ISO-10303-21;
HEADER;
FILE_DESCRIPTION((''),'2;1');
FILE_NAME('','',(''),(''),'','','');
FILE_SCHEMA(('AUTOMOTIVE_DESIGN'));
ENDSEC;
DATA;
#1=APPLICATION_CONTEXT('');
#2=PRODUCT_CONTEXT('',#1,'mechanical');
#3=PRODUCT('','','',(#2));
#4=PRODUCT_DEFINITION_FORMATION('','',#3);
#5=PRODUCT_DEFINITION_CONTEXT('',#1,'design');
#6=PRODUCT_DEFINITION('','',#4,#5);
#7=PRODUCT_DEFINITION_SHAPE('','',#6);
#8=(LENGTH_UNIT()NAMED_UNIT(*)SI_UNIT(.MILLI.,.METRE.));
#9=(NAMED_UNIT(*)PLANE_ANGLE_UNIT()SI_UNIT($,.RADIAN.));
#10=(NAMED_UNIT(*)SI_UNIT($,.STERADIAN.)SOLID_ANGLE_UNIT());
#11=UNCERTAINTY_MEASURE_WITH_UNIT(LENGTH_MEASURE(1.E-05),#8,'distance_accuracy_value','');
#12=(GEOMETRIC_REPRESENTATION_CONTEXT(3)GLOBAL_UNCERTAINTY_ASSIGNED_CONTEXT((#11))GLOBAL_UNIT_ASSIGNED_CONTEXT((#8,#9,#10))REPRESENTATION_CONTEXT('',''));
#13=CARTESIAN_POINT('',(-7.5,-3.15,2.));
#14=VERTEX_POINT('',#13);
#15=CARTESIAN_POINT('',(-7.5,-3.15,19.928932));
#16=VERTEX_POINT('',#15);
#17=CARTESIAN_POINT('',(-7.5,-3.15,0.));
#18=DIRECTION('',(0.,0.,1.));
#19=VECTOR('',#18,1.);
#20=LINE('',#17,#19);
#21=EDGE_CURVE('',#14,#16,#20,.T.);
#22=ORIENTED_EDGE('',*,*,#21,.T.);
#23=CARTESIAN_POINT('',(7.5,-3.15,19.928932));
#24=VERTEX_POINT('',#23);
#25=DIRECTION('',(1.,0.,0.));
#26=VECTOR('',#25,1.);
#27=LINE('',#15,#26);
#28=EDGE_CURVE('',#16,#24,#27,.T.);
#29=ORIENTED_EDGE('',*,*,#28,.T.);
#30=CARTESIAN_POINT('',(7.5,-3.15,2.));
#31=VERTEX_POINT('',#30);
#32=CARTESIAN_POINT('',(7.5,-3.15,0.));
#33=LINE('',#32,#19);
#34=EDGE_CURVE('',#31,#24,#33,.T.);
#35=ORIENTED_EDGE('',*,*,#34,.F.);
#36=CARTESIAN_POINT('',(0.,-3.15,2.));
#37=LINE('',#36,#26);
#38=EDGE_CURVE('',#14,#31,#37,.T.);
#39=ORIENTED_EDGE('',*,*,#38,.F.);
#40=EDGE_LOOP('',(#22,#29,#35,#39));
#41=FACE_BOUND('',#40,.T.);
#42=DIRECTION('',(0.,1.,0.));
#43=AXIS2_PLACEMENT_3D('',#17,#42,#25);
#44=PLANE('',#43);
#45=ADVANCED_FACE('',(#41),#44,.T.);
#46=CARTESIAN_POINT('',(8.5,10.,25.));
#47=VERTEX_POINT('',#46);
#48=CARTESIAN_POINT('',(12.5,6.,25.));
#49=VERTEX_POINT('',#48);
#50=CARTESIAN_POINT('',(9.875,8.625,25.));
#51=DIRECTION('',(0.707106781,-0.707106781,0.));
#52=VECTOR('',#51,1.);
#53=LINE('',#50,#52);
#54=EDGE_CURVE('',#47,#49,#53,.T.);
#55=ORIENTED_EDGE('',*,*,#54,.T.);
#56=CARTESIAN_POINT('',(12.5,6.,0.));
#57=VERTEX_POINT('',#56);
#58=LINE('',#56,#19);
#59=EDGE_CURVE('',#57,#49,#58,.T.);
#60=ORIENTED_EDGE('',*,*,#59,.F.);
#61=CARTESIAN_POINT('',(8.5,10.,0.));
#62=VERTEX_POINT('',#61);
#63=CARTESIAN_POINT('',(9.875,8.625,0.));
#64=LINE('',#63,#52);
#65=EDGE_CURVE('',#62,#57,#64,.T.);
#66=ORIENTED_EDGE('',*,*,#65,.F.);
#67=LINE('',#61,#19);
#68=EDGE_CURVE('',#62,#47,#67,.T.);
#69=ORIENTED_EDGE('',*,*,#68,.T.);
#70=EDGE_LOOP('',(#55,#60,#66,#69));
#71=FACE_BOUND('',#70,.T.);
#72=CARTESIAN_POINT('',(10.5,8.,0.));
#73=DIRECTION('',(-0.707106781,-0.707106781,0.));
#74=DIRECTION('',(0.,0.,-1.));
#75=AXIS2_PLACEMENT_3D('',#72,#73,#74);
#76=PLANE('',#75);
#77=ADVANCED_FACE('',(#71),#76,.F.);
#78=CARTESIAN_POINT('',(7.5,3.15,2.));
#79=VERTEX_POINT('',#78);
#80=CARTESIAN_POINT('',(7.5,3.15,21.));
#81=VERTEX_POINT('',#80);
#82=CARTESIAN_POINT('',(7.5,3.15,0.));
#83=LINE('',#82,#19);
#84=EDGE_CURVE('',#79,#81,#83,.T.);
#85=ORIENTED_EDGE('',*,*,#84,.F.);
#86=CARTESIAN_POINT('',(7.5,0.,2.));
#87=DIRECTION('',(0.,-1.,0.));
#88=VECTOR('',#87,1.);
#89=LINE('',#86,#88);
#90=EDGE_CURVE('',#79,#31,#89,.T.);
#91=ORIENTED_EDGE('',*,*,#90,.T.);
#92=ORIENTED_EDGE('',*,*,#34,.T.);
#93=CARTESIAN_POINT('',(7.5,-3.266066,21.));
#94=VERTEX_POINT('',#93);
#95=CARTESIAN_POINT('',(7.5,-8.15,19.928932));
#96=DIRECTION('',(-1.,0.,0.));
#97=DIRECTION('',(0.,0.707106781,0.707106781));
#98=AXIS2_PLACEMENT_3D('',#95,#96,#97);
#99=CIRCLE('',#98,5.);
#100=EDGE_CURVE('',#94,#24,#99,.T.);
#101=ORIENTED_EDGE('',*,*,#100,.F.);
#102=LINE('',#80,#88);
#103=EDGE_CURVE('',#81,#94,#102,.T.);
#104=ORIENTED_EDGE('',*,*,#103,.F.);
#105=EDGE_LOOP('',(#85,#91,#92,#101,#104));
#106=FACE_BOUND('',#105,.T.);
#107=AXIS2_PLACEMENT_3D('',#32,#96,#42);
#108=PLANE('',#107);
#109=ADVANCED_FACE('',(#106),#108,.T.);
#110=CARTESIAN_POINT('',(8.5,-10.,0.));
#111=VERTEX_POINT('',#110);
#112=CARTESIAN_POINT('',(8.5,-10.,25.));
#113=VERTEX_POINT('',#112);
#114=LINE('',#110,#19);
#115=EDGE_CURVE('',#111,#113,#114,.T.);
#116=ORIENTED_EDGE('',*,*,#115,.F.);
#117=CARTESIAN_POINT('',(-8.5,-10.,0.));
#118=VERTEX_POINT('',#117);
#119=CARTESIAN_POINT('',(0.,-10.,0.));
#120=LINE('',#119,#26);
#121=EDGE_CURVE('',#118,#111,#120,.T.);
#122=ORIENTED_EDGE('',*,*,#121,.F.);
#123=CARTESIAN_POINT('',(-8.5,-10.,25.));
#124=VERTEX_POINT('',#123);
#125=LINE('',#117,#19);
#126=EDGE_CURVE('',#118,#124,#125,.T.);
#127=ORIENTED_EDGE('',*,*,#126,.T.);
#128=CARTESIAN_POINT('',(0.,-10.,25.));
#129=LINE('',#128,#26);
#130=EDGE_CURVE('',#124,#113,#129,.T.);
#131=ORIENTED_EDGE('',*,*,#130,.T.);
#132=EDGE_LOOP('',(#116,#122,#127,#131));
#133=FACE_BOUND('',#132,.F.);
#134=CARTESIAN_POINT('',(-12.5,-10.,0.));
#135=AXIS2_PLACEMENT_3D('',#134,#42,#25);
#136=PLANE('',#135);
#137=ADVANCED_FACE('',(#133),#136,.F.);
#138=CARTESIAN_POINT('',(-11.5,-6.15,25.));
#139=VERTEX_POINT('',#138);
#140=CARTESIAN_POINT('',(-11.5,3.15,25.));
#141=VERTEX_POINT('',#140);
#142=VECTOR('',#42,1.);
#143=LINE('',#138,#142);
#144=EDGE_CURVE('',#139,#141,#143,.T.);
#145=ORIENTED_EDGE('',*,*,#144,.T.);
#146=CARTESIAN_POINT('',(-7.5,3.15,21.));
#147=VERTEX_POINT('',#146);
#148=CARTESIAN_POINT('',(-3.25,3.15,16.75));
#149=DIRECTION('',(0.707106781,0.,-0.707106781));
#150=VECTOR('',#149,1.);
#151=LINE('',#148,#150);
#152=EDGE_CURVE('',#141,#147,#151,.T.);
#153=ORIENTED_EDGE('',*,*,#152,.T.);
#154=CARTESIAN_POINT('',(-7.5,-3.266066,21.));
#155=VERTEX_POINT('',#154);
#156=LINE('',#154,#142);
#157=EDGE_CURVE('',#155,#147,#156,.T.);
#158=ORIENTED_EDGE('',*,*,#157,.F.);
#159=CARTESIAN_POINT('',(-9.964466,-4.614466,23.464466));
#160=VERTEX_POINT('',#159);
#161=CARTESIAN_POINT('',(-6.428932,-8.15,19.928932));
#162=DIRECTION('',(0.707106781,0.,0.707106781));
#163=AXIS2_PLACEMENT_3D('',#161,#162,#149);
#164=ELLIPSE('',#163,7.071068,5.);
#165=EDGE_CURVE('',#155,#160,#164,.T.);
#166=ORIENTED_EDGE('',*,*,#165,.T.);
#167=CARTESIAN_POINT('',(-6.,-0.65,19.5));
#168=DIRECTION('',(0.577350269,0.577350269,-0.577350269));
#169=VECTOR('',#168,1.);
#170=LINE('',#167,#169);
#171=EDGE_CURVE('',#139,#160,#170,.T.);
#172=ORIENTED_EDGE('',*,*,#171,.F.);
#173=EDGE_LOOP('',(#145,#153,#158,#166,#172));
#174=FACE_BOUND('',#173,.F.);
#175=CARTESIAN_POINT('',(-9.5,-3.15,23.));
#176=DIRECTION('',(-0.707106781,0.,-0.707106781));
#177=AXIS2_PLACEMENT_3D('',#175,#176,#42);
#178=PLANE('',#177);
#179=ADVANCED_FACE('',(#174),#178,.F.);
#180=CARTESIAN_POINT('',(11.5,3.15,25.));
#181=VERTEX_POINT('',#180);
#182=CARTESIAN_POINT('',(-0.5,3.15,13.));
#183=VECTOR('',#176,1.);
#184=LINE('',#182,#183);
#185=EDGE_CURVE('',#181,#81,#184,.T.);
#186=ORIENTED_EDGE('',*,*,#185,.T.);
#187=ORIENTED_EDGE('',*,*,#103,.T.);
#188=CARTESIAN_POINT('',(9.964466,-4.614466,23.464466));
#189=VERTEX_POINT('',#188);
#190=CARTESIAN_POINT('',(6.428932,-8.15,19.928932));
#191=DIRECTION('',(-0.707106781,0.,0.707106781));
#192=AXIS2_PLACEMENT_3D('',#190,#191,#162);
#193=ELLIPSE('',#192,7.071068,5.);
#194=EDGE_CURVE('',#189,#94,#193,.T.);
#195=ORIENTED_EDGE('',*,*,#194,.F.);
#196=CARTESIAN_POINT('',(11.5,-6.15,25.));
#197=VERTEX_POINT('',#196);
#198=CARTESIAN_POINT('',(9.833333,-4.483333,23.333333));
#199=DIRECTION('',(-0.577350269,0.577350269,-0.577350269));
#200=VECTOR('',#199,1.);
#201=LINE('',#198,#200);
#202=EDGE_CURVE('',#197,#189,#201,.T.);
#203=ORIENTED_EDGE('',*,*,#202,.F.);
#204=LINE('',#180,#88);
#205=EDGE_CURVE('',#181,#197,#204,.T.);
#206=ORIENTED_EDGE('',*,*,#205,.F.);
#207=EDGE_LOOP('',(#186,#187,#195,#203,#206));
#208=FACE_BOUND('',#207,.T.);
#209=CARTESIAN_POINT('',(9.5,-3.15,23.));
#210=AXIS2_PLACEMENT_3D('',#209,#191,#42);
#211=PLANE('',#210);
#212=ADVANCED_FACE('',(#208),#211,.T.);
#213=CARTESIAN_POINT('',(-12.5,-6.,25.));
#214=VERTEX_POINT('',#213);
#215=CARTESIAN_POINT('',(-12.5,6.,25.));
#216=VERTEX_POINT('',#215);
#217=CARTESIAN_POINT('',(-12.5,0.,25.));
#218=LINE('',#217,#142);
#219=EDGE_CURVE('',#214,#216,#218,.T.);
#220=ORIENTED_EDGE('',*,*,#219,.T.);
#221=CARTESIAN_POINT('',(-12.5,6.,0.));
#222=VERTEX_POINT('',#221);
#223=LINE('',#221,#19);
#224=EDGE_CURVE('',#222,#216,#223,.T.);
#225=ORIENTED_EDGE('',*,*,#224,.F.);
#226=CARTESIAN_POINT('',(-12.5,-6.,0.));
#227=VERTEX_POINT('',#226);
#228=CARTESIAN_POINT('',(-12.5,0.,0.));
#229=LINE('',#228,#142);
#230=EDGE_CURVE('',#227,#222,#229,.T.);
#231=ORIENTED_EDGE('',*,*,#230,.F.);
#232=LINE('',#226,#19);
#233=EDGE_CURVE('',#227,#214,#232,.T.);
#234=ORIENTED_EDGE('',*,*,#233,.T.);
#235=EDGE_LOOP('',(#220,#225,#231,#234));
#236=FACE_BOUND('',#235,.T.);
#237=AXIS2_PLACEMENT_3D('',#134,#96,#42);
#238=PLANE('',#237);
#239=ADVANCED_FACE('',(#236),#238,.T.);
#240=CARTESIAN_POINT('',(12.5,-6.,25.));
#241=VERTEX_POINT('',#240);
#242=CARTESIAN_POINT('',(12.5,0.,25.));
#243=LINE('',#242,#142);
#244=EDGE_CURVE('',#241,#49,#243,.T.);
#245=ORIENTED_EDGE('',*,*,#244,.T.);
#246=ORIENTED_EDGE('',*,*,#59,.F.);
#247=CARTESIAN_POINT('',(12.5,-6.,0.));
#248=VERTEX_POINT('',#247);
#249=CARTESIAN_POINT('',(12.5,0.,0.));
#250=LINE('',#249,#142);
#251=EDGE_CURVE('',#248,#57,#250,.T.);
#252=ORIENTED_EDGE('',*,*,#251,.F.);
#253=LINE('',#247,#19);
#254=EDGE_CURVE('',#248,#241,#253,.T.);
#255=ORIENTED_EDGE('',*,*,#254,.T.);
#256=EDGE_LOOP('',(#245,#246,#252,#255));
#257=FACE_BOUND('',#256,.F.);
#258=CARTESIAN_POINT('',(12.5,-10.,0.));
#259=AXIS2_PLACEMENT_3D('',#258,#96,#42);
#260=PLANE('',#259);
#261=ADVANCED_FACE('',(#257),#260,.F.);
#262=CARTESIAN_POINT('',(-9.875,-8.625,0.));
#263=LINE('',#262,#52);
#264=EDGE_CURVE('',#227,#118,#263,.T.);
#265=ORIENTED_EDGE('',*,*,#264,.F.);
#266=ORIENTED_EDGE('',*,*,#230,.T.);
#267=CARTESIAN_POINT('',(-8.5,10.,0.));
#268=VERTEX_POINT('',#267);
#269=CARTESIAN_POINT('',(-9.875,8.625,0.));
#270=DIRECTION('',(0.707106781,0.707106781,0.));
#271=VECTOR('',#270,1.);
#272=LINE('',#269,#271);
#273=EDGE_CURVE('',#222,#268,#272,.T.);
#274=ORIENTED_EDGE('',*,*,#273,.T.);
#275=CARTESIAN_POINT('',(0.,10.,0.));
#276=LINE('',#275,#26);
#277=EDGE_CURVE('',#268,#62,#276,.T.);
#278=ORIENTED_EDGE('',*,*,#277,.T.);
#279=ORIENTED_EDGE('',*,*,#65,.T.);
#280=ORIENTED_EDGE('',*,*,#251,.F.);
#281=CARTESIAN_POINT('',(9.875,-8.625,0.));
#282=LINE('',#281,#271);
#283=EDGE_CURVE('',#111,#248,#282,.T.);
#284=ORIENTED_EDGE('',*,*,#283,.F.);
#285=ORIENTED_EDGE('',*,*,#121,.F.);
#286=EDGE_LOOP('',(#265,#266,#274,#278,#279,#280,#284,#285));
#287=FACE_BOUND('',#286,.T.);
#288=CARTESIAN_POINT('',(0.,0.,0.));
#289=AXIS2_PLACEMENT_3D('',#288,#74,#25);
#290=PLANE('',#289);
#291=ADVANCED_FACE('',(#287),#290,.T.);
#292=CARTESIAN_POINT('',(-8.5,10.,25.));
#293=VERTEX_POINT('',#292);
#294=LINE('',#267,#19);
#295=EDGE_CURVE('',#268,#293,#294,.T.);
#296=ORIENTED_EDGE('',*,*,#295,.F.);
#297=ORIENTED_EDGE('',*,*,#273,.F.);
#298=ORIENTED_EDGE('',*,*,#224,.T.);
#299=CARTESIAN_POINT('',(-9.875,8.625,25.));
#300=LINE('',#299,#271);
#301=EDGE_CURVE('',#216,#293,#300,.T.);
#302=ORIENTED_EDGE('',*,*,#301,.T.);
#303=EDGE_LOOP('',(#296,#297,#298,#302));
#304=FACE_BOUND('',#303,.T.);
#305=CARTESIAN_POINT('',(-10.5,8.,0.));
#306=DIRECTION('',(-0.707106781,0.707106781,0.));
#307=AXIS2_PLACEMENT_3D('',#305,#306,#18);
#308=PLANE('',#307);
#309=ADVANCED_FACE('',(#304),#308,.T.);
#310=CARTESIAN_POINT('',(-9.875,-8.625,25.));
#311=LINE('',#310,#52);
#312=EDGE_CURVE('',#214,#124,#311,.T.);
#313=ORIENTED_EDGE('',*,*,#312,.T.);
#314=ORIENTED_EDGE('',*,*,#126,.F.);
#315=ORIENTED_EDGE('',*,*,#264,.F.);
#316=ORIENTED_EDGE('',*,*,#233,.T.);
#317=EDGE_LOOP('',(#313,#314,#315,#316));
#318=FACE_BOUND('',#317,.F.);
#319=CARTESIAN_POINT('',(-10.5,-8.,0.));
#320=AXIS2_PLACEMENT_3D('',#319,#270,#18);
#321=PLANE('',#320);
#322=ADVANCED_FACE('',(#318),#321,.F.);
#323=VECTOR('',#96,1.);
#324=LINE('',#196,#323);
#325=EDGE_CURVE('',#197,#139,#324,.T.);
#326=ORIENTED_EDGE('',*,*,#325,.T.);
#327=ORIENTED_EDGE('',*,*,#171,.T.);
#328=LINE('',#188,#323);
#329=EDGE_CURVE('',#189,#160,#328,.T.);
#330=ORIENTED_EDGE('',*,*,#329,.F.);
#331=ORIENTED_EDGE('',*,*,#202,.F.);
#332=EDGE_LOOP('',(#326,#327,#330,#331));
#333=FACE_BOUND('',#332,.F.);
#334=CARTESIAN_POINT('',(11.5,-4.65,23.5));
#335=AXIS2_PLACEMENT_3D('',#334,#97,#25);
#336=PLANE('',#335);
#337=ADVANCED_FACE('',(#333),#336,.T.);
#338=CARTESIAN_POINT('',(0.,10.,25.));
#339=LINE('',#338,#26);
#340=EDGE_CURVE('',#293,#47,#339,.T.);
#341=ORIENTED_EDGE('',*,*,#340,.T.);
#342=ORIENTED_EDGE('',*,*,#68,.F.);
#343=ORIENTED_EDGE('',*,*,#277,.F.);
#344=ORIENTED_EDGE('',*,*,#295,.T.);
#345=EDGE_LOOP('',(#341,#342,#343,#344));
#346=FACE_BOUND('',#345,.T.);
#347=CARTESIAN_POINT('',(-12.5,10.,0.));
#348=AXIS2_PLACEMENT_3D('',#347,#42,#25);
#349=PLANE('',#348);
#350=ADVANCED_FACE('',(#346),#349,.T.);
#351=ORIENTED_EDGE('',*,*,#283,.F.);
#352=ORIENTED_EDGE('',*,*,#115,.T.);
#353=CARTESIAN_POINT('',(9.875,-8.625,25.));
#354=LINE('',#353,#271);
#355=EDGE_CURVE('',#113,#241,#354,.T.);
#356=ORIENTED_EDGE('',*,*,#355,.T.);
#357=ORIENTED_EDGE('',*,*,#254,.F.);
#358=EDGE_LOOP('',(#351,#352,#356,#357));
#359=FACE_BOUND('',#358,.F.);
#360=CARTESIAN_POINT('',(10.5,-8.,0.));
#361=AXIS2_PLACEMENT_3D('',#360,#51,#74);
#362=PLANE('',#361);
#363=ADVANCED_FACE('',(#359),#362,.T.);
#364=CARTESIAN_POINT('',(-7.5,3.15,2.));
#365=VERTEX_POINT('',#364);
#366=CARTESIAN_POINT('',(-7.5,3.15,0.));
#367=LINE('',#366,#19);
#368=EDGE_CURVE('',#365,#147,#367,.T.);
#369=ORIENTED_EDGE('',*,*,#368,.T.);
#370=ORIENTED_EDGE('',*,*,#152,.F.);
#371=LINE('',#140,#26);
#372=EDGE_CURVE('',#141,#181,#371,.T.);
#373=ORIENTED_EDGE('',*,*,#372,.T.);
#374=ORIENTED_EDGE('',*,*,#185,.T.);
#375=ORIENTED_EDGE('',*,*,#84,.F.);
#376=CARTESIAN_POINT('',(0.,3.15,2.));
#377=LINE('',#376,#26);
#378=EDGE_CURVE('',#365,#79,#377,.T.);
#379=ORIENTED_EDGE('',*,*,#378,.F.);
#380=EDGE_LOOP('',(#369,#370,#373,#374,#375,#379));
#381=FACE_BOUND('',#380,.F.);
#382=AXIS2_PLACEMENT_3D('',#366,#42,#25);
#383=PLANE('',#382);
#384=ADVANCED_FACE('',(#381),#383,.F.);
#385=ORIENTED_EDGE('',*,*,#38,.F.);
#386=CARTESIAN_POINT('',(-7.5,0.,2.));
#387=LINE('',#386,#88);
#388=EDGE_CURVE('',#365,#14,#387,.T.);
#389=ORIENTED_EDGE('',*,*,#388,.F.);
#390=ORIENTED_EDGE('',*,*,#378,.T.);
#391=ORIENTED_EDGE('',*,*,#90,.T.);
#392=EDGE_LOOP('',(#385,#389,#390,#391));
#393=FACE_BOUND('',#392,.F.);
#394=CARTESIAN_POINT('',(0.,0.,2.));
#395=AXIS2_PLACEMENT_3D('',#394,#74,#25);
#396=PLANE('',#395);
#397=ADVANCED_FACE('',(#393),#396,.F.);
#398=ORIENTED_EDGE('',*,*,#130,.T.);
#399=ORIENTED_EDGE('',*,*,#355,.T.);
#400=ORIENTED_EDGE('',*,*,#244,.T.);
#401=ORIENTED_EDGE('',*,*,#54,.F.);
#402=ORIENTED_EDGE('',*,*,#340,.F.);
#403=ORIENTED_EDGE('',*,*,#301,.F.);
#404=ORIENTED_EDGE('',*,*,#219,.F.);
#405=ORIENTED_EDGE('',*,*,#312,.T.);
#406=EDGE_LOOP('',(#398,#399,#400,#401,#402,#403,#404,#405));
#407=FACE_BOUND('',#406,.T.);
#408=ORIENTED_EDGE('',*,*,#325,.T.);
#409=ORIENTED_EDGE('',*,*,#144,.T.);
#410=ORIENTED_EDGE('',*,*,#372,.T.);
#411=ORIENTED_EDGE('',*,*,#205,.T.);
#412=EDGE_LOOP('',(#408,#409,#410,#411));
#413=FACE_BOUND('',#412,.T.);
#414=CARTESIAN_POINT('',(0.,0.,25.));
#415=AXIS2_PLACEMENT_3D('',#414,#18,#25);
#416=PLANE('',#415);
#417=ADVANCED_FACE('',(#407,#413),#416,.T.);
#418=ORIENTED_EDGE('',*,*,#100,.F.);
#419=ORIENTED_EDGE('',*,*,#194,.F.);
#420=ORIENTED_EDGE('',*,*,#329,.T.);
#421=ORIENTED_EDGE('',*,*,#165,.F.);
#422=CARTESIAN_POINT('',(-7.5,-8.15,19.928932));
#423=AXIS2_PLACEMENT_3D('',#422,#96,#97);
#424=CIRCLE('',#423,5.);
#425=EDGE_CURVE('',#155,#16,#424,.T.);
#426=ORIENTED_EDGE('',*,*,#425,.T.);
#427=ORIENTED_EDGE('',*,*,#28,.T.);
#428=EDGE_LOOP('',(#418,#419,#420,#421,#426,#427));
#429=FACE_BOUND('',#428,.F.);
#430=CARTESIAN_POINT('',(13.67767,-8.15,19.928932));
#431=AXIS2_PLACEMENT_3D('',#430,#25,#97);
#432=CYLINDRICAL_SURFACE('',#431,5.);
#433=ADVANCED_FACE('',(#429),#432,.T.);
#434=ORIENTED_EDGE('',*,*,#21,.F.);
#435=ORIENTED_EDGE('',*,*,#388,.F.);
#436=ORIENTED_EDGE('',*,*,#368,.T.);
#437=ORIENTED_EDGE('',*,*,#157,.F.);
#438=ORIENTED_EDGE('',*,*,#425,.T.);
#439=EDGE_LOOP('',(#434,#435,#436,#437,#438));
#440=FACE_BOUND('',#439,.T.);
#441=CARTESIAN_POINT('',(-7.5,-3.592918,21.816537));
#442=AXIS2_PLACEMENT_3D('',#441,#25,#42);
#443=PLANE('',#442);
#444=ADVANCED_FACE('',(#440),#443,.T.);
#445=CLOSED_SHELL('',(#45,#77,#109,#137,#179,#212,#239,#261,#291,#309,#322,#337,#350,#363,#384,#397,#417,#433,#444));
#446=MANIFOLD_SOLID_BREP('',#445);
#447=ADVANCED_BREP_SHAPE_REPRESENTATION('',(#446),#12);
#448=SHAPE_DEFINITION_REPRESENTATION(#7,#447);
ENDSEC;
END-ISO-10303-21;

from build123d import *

# Parameters (mm, degrees)
F0_W         = 25
F0_H         = 20
F0_W_2       = 15
F0_H_2       = 6.3
F1_DEPTH     = 25
F2_W         = 15
F2_H         = 6.3
F3_DEPTH     = 2
F4_SIZE      = 4
F5_SIZE      = 3
F6_T1_DEPTH  = 15
F6_T6_DEPTH  = 6.1776695297
F6_T11_DEPTH = 6.1776695297


# Not quite as in the source:
# - a fillet or chamfer that OpenCascade refuses, or shapes differently, is made with other operations: its cross-section is extruded or revolved along the edge and cut away or added


with BuildPart() as f1:
    # F0 (on Top) → F1 (new body)
    with BuildSketch(Plane.XY):
        Rectangle(F0_W, F0_H)
        Rectangle(F0_W_2, F0_H_2, mode=Mode.SUBTRACT)
    extrude(amount=F1_DEPTH)

    # F2 (on face) → F3 (join)
    with BuildSketch(Plane(origin=(0, 0, 0), x_dir=(1, 0, 0), z_dir=(0, 0, -1))):
        Rectangle(F2_W, F2_H)
    extrude(amount=-F3_DEPTH)

    # F4
    f4_edges = [f1.edges().sort_by_distance(p)[0] for p in [
        (-7.5, 0, 25),
        (7.5, 0, 25),
        (-12.5, -10, 12.5),
        (12.5, -10, 12.5),
        (12.5, 10, 12.5),
        (-12.5, 10, 12.5),
    ]]
    chamfer(f4_edges, length=F4_SIZE)

    # F5
    f5_edges = [f1.edges().sort_by_distance(p)[0] for p in [
        (0, -3.15, 25),
    ]]
    chamfer(f5_edges, length=F5_SIZE)

    # F6: fillet of radius 5 on 1 edges, made by hand

    # F6_s2 → F6_t1 (cut)
    with BuildSketch(Plane.YZ.offset(-7.5)):
        with BuildLine():
            ThreePointArc((-4.6144660941, 23.4644660941), (-3.5306023374, 21.84234935), (-3.15, 19.9289321881))
            Line((-3.15, 19.9289321881), (-3.15, 22))
            Line((-3.15, 22), (-4.6144660941, 23.4644660941))
        make_face()
    extrude(amount=F6_T1_DEPTH, mode=Mode.SUBTRACT)


with BuildPart() as f6_tool4:
    # F6_s5 → F6_t6 (new body)
    with BuildSketch(Plane.YZ.offset(13.6776695297)):
        with BuildLine():
            ThreePointArc((-4.6144660941, 23.4644660941), (-3.5306023374, 21.84234935), (-3.15, 19.9289321881))
            Line((-3.15, 19.9289321881), (-3.15, 22))
            Line((-3.15, 22), (-4.6144660941, 23.4644660941))
        make_face()
    extrude(amount=-F6_T6_DEPTH)

    split(bisect_by=Plane(origin=(-6.75, 0, 6.75), x_dir=(0, 1, 0), z_dir=(-0.7071067812, 0, 0.7071067812)), keep=Keep.TOP)


with BuildPart() as f1_1:
    add(f1.part)

    # F6_t3: cut F6_tool4
    add(f6_tool4.part, mode=Mode.SUBTRACT)


with BuildPart() as f6_tool9:
    # F6_s10 → F6_t11 (new body)
    with BuildSketch(Plane.YZ.offset(-7.5)):
        with BuildLine():
            ThreePointArc((-4.6144660941, 23.4644660941), (-3.5306023374, 21.84234935), (-3.15, 19.9289321881))
            Line((-3.15, 19.9289321881), (-3.15, 22))
            Line((-3.15, 22), (-4.6144660941, 23.4644660941))
        make_face()
    extrude(amount=-F6_T11_DEPTH)

    split(bisect_by=Plane(origin=(6.75, 0, 6.75), x_dir=(0, 1, 0), z_dir=(0.7071067812, 0, 0.7071067812)), keep=Keep.TOP)


with BuildPart() as f1_2:
    add(f1_1.part)

    # F6_t8: cut F6_tool9
    add(f6_tool9.part, mode=Mode.SUBTRACT)


solid = f1_2.part
